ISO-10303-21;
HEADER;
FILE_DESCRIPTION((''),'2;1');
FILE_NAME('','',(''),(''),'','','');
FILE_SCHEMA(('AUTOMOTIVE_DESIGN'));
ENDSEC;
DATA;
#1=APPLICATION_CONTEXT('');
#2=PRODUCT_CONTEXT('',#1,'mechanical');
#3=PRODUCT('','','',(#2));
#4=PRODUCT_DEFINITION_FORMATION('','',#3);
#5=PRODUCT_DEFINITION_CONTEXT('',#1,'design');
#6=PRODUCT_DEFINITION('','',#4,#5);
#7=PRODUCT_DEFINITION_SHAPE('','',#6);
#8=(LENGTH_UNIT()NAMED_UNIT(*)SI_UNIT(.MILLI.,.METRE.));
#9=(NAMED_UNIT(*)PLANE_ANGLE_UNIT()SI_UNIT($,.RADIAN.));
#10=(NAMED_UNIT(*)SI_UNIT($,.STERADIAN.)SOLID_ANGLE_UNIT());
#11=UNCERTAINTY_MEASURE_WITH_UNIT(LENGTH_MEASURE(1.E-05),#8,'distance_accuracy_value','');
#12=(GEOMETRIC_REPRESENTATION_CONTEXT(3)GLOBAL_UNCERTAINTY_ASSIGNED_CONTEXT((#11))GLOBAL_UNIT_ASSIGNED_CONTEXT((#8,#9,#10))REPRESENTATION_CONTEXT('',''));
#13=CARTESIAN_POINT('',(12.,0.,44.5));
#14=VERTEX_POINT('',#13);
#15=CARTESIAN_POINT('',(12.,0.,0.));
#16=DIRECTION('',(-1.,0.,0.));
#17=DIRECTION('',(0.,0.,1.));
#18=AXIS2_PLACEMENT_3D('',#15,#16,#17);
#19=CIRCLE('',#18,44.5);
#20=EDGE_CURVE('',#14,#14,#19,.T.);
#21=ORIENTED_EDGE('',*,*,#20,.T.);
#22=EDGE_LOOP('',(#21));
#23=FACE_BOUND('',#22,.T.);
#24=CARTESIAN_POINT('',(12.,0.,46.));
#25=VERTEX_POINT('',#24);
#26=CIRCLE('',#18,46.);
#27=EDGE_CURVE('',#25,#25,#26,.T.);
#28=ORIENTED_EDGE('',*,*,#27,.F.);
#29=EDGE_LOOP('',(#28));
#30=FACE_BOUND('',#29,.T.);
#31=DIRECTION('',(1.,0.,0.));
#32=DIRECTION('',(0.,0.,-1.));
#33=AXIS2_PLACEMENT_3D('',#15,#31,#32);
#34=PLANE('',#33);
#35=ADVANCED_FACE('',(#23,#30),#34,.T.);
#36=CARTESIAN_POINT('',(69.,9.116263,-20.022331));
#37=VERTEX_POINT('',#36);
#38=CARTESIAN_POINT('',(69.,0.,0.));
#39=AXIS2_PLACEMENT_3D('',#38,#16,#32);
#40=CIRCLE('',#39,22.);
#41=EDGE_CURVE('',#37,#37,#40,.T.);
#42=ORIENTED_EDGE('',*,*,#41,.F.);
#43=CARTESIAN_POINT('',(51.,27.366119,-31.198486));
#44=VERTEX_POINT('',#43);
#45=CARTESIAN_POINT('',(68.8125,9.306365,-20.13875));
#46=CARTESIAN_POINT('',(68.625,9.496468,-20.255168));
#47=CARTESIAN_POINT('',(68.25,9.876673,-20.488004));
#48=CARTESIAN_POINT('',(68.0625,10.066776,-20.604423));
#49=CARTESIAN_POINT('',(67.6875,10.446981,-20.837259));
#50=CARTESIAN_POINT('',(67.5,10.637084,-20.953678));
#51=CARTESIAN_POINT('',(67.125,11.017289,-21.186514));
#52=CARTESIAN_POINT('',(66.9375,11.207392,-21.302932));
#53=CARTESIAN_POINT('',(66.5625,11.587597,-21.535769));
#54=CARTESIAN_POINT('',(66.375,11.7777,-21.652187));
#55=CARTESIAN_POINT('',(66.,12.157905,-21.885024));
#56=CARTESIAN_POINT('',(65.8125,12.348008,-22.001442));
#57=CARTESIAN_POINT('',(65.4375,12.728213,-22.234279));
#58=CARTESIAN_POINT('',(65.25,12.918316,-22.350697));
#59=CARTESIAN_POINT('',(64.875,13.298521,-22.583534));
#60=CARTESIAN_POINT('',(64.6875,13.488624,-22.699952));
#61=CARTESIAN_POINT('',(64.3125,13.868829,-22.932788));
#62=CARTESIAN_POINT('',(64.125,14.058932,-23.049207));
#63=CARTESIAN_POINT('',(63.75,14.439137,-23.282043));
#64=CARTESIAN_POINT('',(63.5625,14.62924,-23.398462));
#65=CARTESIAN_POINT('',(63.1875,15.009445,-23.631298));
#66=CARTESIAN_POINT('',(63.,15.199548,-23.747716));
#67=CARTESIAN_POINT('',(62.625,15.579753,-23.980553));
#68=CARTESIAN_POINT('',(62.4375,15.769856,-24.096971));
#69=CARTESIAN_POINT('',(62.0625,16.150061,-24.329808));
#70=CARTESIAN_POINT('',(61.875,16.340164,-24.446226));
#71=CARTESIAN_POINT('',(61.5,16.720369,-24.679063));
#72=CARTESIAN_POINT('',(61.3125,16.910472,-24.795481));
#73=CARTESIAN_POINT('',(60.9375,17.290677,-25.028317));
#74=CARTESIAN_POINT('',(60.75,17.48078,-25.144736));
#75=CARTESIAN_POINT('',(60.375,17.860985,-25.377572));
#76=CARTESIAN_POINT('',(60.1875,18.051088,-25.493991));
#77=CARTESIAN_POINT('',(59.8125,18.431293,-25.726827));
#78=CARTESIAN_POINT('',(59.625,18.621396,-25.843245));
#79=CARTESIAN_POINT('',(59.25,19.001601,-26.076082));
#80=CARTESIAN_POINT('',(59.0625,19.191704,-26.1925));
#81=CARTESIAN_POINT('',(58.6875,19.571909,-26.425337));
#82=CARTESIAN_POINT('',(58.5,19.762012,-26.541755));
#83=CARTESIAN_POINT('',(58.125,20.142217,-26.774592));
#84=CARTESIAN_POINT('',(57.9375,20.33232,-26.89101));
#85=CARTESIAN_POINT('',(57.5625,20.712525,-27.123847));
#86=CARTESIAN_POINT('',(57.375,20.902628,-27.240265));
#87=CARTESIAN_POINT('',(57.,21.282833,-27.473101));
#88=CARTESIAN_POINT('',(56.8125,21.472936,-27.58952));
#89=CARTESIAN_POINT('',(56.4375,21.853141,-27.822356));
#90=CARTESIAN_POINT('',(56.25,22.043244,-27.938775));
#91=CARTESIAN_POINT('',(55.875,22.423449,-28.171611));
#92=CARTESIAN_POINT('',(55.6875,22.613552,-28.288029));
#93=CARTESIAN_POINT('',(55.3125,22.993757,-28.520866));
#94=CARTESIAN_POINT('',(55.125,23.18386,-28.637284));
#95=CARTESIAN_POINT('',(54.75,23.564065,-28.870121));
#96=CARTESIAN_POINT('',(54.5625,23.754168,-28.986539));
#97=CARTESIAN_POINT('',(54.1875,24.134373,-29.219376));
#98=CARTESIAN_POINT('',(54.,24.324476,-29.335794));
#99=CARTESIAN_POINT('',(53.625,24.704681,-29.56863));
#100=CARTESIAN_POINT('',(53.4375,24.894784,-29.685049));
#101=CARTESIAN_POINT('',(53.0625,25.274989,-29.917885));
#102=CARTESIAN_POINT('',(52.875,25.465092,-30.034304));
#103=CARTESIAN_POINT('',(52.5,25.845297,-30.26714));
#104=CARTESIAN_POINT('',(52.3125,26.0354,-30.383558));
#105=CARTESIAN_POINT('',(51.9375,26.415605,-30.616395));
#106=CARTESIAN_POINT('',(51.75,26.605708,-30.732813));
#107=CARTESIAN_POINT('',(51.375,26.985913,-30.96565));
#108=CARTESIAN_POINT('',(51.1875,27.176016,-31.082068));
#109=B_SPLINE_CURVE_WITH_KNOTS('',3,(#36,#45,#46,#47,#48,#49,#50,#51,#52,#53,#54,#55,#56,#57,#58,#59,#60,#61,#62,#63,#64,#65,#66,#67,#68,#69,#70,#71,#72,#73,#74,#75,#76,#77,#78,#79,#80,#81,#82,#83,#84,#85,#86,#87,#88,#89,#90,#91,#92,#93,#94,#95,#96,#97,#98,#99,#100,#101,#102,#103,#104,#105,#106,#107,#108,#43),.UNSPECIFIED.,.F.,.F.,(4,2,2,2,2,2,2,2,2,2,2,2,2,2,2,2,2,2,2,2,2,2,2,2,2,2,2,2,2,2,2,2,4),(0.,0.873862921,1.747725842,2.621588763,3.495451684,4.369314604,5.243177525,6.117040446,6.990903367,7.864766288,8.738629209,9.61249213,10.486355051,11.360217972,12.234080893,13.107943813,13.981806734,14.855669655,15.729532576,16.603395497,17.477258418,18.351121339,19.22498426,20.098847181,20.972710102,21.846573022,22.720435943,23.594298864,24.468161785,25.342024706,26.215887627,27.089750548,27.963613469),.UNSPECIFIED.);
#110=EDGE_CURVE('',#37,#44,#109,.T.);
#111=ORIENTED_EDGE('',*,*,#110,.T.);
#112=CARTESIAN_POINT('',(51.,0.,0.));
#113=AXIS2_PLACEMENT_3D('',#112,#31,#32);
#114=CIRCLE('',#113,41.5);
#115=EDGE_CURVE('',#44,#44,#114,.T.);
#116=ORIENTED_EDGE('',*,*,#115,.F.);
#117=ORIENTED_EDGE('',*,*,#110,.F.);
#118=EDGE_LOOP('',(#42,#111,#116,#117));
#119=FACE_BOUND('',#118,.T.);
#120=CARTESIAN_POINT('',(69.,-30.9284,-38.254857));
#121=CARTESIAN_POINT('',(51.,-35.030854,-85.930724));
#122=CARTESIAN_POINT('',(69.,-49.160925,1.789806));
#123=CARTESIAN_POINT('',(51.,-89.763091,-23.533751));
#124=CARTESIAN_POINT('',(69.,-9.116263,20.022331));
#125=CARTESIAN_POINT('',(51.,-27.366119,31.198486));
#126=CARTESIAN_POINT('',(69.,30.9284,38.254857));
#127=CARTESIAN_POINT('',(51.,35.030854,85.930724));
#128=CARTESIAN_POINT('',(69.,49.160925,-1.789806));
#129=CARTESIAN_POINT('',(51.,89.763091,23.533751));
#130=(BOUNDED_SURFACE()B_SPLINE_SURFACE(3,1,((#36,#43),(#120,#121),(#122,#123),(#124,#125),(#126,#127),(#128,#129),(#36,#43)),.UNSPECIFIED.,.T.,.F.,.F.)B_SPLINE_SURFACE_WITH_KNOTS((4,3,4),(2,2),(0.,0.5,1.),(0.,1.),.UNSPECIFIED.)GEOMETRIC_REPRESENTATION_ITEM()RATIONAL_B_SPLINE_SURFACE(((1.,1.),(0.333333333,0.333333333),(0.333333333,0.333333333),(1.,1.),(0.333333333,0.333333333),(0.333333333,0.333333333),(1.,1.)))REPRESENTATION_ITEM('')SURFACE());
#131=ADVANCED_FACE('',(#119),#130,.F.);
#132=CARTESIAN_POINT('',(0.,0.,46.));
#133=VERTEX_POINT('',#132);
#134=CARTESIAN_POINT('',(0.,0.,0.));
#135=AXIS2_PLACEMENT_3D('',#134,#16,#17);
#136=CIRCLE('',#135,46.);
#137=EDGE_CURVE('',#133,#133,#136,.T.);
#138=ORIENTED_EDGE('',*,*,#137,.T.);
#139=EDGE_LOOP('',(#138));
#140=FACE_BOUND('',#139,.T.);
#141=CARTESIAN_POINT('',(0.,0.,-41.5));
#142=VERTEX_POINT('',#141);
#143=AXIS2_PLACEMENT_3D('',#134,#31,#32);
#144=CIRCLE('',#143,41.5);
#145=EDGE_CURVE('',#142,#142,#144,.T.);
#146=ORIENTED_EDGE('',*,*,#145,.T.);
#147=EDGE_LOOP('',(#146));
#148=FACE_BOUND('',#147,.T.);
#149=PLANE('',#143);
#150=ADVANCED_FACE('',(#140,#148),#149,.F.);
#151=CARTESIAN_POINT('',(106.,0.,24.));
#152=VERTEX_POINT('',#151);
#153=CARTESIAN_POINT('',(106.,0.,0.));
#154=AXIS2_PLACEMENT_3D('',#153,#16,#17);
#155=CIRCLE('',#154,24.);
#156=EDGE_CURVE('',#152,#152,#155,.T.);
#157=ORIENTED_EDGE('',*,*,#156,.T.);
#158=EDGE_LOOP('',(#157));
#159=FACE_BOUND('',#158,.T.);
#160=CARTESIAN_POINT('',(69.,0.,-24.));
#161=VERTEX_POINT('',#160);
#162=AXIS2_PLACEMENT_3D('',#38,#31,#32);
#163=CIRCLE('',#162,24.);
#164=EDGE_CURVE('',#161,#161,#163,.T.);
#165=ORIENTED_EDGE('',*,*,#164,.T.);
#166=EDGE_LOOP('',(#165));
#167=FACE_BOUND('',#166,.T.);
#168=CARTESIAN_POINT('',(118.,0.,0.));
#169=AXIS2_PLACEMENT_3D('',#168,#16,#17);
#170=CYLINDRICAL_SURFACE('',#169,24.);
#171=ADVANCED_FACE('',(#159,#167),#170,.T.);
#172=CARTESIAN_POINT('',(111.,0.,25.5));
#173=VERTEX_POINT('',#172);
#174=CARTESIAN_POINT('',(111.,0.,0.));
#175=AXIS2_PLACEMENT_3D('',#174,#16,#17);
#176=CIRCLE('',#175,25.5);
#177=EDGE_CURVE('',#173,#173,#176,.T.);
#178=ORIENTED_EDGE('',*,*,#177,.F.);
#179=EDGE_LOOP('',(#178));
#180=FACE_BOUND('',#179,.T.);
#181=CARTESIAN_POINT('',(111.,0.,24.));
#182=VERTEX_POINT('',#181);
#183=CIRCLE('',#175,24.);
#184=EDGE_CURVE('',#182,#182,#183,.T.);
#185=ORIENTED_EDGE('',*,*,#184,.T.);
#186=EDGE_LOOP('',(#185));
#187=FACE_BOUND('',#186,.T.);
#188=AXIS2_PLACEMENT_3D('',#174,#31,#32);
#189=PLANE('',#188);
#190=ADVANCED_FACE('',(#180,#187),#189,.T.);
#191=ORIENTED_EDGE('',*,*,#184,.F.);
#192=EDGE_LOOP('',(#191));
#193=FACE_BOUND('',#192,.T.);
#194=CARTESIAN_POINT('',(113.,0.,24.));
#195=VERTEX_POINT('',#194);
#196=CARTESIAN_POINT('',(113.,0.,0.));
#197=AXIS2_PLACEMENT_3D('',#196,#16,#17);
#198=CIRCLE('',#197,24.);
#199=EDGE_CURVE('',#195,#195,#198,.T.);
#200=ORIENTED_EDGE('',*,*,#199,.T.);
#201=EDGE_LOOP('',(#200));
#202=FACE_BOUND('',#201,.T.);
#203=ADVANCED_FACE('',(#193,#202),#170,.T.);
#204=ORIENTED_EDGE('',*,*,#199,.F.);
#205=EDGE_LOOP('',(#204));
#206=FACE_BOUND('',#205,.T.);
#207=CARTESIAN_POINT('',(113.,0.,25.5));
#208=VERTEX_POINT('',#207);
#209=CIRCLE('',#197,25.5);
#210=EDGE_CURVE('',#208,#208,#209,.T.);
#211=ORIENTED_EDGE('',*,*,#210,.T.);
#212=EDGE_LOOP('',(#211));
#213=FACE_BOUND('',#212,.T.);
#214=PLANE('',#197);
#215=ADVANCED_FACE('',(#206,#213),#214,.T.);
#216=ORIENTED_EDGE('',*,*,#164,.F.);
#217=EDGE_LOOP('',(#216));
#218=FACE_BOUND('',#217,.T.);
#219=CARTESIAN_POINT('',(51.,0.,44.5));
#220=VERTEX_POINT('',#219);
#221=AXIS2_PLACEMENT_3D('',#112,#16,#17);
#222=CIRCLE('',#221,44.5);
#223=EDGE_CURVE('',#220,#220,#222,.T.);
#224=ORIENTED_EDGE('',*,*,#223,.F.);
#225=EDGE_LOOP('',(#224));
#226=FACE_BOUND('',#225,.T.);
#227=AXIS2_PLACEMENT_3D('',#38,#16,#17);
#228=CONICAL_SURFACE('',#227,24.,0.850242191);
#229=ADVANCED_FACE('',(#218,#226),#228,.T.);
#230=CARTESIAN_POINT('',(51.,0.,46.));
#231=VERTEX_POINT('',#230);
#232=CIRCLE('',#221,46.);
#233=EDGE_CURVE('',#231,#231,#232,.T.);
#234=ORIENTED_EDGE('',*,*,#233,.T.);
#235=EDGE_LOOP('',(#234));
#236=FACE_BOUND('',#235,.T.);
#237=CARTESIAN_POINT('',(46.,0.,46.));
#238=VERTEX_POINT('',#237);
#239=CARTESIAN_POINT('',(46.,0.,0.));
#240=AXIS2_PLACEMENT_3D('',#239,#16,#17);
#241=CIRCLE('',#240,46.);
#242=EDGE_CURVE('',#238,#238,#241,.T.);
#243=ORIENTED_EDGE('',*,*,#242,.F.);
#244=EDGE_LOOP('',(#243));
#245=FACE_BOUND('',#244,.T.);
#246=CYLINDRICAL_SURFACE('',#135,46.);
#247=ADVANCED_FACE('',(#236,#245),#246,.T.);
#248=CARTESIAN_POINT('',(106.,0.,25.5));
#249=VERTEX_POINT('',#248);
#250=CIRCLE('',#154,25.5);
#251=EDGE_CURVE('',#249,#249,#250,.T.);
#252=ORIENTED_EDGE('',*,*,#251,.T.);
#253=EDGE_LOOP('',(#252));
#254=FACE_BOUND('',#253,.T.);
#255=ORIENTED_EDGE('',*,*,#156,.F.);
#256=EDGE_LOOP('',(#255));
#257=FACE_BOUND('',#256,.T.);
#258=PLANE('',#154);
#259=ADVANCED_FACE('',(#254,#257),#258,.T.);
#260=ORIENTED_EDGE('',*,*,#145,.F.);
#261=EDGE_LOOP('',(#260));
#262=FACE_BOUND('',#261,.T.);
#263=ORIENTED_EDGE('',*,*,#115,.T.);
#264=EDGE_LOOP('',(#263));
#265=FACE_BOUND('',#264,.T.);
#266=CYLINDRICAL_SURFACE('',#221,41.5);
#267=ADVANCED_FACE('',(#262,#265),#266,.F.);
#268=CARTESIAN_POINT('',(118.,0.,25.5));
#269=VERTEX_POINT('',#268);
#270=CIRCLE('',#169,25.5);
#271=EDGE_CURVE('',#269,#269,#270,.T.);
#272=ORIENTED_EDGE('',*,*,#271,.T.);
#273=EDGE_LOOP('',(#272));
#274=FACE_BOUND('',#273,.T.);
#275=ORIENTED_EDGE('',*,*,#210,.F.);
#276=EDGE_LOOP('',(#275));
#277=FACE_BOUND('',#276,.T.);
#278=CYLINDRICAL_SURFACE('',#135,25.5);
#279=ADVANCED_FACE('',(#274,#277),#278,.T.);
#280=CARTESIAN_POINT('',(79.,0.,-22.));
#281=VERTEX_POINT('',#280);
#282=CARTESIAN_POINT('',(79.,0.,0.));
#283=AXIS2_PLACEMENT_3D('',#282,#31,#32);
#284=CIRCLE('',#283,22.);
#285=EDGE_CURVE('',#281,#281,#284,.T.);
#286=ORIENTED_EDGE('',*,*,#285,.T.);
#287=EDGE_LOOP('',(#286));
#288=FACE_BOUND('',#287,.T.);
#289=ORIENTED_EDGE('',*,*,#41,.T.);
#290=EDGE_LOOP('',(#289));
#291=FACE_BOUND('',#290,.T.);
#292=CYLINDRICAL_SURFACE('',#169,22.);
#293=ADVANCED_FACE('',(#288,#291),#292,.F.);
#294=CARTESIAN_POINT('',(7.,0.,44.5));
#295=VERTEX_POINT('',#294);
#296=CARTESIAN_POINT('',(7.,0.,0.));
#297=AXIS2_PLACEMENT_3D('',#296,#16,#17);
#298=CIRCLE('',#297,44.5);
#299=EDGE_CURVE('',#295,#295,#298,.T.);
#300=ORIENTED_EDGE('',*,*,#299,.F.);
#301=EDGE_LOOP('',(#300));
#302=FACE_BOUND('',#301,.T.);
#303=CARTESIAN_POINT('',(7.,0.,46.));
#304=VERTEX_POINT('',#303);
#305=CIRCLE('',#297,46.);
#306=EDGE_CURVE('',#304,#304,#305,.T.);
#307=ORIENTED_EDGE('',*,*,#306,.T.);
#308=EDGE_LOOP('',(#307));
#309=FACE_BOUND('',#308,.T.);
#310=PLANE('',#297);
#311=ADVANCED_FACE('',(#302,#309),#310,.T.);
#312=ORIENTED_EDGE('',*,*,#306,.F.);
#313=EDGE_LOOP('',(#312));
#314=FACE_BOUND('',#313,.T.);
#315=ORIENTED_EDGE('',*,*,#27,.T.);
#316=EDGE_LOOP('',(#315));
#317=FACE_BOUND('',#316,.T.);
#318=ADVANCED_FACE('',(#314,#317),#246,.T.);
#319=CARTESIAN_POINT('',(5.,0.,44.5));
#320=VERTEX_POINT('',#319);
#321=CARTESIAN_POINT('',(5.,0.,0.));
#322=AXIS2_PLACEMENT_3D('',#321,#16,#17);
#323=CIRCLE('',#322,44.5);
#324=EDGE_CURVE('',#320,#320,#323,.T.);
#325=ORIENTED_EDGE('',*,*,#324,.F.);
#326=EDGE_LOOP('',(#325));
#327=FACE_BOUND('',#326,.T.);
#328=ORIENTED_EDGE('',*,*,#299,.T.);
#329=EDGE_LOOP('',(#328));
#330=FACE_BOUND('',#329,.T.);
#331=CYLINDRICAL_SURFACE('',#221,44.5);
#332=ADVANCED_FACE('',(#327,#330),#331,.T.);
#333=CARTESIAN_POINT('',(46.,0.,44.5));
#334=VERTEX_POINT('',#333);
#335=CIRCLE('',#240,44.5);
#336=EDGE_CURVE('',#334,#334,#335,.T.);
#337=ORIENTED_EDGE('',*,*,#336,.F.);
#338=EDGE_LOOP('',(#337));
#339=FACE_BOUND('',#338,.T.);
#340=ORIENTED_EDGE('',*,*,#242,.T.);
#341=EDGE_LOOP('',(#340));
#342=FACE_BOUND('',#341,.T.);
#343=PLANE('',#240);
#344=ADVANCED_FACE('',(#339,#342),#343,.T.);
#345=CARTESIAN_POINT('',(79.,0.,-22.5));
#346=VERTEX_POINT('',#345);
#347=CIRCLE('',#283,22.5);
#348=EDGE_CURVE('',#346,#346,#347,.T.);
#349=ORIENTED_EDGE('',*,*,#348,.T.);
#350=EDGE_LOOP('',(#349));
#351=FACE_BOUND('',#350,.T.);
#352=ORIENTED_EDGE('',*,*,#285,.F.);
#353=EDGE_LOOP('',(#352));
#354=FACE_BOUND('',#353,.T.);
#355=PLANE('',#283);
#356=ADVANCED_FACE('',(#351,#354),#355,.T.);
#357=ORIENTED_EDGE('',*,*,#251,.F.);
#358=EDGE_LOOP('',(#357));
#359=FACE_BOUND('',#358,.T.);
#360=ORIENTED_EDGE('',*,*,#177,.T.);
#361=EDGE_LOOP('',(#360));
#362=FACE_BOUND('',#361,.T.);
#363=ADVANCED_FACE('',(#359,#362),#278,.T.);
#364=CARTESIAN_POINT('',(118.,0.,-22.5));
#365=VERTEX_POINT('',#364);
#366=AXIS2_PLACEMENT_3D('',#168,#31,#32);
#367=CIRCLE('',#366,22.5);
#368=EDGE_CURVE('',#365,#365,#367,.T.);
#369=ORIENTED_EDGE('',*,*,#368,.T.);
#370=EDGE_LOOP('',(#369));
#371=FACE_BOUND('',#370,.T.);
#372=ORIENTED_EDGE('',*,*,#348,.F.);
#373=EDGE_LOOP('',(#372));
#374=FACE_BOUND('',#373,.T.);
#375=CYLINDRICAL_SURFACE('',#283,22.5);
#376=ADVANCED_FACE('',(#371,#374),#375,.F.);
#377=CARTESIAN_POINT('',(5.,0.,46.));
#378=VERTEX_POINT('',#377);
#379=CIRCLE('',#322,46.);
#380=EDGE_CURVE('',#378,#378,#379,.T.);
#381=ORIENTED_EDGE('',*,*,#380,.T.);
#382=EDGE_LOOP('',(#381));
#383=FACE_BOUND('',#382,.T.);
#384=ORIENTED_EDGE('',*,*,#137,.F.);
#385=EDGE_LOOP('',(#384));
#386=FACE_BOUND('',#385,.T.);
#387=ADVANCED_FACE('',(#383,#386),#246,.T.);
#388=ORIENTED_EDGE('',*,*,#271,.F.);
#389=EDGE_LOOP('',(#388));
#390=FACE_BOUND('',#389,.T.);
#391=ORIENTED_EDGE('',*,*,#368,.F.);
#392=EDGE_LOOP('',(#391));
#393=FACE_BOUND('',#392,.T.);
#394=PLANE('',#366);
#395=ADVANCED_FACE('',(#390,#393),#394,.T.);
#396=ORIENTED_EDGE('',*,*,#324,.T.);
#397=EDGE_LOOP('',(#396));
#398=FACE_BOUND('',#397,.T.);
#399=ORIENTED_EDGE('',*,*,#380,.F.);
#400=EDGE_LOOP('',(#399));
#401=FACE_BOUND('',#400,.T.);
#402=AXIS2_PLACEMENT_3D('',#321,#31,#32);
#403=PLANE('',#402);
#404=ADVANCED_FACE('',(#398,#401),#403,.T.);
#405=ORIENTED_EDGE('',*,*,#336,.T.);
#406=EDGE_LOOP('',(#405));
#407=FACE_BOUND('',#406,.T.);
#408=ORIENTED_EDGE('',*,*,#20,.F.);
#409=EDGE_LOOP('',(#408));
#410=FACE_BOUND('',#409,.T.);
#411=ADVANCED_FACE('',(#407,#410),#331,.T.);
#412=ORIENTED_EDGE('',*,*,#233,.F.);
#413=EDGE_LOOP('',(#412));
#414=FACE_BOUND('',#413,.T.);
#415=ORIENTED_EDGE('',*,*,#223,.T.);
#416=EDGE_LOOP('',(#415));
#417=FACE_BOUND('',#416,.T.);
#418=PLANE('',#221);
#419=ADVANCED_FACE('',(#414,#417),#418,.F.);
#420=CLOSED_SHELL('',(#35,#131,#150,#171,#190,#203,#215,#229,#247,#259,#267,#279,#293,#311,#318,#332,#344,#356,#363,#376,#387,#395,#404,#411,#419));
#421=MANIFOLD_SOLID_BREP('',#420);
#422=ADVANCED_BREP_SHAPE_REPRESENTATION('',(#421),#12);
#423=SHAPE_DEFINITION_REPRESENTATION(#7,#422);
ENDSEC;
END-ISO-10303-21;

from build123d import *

# Parameters (mm, degrees)
SKELETON_R          = 44.5
SKELETON_R_2        = 41.5
BOSS_EXTRUDE1_DEPTH = 51
BOSS_EXTRUDE2_START = 69
SKELETON_3_R        = 24
SKELETON_3_R_2      = 22
BOSS_EXTRUDE2_DEPTH = 49
SKETCH4_W           = 5
SKETCH4_H           = 1.5
SKETCH6_R           = 22.5
CUT_EXTRUDE1_DEPTH  = 39


with BuildPart() as part:
    # Skeleton → Boss-Extrude1 (new body)
    with BuildSketch(Plane(origin=(0, 0, 0), x_dir=(0, 0, -1), z_dir=(1, 0, 0))):
        Circle(SKELETON_R)
        Circle(SKELETON_R_2, mode=Mode.SUBTRACT)
    extrude(amount=BOSS_EXTRUDE1_DEPTH)



with BuildPart() as body_2:
    # Skeleton<3> → Boss-Extrude2 (new body)
    with BuildSketch(Plane(origin=(0, 0, 0), x_dir=(0, 0, -1), z_dir=(1, 0, 0)).offset(BOSS_EXTRUDE2_START)):
        Circle(SKELETON_3_R)
        Circle(SKELETON_3_R_2, mode=Mode.SUBTRACT)
    extrude(amount=BOSS_EXTRUDE2_DEPTH)


with BuildPart() as part_1:
    add(part.part)

    add(body_2.part)  # loft1 joins it to this body
    # loft up to a face of the part (loft1)
    loft([Face(Wire([part_1.edges().sort_by_distance((51, 32.43910392, 30.462346214))[0]])), Face(Wire([part_1.edges().sort_by_distance((69, -17.495247058, 16.429130542))[0]]))])

    # Cut-Loft1: read off the stored shape, not the designer's step
    # Cut-Loft1: loft between two sections, ruled curve by curve
    cut_loft1_from = [
        Edge.make_bspline([(69, 9.116262782, -20.022331355), (69, -30.928399928, -38.254856919), (69, -49.160925492, 1.789805791), (69, -9.116262782, 20.022331355), (69, 30.928399928, 38.254856919), (69, 49.160925492, -1.789805791), (69, 9.116262782, -20.022331355)], [0, 0, 0, 0, 0.5, 0.5, 0.5, 1, 1, 1, 1], 3, [1, 0.333333333, 0.333333333, 1, 0.333333333, 0.333333333, 1]),
    ]
    cut_loft1_to = [
        Edge.make_bspline([(51, 27.366118575, -31.198486408), (51, -35.030854242, -85.930723557), (51, -89.763091391, -23.533750741), (51, -27.366118575, 31.198486408), (51, 35.030854242, 85.930723557), (51, 89.763091391, 23.533750741), (51, 27.366118575, -31.198486408)], [0, 0, 0, 0, 0.5, 0.5, 0.5, 1, 1, 1, 1], 3, [1, 0.333333333, 0.333333333, 1, 0.333333333, 0.333333333, 1]),
    ]
    cut_loft1 = Solid(Shell([*[Face.make_surface_from_curves(cut_loft1_from[k], cut_loft1_to[k]) for k in range(1)], Face(Wire(cut_loft1_from)), Face(Wire(cut_loft1_to))]))
    add(cut_loft1, mode=Mode.SUBTRACT)

    # Sketch4 → Revolve1 (revolve)
    with BuildSketch(Plane.XY, mode=Mode.PRIVATE) as revolve1_sk:
        with Locations((9.5, 45.25)):
            Rectangle(SKETCH4_W, SKETCH4_H)
        with Locations((2.5, 45.25)):
            Rectangle(SKETCH4_W, SKETCH4_H)
        with Locations((48.5, 45.25)):
            Rectangle(SKETCH4_W, SKETCH4_H)
        with Locations((108.5, 24.75)):
            Rectangle(SKETCH4_W, SKETCH4_H)
        with Locations((115.5, 24.75)):
            Rectangle(SKETCH4_W, SKETCH4_H)
    revolve(revolve1_sk.sketch.rotate(Axis((0, 0, 0), (1, 0, 0)), 90), axis=Axis((0, 0, 0), (1, 0, 0)))

    # Sketch6 → Cut-Extrude1 (cut)
    with BuildSketch(Plane(origin=(118, 0, 0), x_dir=(0, 0, -1), z_dir=(1, 0, 0))):
        Circle(SKETCH6_R)
    extrude(amount=-CUT_EXTRUDE1_DEPTH, mode=Mode.SUBTRACT)


solid = part_1.part
